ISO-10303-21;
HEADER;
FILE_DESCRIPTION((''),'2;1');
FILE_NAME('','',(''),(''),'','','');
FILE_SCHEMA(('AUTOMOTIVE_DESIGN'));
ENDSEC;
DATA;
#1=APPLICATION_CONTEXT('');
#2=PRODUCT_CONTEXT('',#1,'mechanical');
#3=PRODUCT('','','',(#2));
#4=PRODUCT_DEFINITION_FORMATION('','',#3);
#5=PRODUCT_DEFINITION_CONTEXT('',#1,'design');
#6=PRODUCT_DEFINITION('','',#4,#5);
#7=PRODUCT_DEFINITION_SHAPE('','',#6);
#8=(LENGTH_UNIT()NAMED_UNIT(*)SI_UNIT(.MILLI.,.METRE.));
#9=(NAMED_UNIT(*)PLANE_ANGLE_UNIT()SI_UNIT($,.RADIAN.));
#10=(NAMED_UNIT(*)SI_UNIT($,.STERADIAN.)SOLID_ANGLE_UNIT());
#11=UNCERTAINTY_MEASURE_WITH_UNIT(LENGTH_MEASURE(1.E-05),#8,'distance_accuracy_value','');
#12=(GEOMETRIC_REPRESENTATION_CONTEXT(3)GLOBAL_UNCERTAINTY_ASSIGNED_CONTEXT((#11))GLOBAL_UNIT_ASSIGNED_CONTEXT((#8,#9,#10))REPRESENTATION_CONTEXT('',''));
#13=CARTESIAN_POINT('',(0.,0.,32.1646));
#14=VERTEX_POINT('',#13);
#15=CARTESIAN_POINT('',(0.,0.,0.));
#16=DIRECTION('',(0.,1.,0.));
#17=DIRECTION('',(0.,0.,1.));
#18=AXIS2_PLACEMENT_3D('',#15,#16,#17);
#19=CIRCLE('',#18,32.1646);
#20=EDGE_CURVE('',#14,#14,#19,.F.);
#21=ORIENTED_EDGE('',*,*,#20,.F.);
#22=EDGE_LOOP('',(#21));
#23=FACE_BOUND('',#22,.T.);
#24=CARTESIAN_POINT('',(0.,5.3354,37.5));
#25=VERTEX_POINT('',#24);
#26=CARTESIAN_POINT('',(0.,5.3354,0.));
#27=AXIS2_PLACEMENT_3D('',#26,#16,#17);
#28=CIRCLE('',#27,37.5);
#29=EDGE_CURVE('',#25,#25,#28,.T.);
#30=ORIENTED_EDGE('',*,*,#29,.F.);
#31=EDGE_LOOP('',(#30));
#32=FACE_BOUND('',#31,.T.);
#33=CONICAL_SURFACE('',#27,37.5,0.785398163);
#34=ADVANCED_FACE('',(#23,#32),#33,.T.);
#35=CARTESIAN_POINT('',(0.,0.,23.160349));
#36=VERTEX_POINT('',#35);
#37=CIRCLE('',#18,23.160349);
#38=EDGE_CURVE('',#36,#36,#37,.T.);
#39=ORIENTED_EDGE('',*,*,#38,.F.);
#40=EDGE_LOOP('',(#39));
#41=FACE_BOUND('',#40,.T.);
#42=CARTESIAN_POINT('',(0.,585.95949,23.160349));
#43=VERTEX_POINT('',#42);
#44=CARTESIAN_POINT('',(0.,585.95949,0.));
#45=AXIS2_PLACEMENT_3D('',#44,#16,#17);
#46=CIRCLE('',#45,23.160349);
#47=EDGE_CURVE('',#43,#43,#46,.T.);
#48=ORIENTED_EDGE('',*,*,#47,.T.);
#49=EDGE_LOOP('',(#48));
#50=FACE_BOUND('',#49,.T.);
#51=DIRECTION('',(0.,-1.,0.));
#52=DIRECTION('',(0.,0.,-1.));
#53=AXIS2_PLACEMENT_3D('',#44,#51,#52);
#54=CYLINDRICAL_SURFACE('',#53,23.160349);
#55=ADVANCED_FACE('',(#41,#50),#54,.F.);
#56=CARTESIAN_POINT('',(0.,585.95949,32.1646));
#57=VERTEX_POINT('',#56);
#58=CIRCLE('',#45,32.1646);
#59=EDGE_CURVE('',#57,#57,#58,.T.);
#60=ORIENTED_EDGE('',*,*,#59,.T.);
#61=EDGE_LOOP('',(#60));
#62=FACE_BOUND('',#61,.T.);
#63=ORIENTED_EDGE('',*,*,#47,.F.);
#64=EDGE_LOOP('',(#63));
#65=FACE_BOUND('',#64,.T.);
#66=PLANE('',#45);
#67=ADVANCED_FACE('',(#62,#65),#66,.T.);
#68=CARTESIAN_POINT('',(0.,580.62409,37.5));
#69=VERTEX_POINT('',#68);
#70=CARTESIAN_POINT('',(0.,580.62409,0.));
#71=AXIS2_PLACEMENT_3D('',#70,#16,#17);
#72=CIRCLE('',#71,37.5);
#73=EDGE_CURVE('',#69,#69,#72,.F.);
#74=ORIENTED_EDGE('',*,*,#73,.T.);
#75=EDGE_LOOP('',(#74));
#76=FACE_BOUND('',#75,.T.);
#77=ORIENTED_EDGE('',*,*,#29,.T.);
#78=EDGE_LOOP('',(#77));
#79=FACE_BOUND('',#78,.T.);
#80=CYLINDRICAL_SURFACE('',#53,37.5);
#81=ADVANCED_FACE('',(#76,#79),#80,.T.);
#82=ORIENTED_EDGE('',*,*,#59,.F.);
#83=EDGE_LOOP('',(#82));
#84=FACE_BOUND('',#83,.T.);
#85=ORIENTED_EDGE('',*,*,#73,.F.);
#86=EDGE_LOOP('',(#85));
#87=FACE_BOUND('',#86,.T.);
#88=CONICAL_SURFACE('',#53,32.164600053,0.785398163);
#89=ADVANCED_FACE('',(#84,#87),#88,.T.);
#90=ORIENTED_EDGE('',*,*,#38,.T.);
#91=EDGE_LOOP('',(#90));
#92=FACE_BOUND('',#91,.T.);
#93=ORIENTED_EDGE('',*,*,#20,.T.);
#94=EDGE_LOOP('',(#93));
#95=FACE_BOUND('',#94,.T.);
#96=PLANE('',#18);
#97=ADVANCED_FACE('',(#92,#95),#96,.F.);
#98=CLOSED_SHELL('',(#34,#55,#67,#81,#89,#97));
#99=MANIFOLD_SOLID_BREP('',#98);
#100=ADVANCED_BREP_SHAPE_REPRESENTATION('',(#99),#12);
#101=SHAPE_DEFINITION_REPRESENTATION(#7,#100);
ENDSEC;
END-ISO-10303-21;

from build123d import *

# Parameters (mm, degrees)
SKETCH1_R           = 37.5
BOSS_EXTRUDE1_DEPTH = 585.959490334
SKETCH2_R           = 23.16034936
CUT_EXTRUDE1_DEPTH  = 589.354505645
CHAMFER1_SIZE       = 5.335399947


with BuildPart() as part:
    # Sketch1 → Boss-Extrude1 (new body)
    with BuildSketch(Plane(origin=(0, 0, 0), x_dir=(1, 0, 0), z_dir=(0, 1, 0))):
        Circle(SKETCH1_R)
    extrude(amount=BOSS_EXTRUDE1_DEPTH)

    # Sketch2 → Cut-Extrude1 (cut, through all)
    with BuildSketch(Plane(origin=(0, 0, 0), x_dir=(1, 0, 0), z_dir=(0, 1, 0))):
        Circle(SKETCH2_R)
    extrude(amount=CUT_EXTRUDE1_DEPTH, mode=Mode.SUBTRACT)

    # Chamfer1
    chamfer1_edges = [part.edges().sort_by_distance(p)[0] for p in [
        (-37.5, 585.959490334, 0),
        (-37.5, 0, 0),
    ]]
    chamfer(chamfer1_edges, length=CHAMFER1_SIZE)


solid = part.part
